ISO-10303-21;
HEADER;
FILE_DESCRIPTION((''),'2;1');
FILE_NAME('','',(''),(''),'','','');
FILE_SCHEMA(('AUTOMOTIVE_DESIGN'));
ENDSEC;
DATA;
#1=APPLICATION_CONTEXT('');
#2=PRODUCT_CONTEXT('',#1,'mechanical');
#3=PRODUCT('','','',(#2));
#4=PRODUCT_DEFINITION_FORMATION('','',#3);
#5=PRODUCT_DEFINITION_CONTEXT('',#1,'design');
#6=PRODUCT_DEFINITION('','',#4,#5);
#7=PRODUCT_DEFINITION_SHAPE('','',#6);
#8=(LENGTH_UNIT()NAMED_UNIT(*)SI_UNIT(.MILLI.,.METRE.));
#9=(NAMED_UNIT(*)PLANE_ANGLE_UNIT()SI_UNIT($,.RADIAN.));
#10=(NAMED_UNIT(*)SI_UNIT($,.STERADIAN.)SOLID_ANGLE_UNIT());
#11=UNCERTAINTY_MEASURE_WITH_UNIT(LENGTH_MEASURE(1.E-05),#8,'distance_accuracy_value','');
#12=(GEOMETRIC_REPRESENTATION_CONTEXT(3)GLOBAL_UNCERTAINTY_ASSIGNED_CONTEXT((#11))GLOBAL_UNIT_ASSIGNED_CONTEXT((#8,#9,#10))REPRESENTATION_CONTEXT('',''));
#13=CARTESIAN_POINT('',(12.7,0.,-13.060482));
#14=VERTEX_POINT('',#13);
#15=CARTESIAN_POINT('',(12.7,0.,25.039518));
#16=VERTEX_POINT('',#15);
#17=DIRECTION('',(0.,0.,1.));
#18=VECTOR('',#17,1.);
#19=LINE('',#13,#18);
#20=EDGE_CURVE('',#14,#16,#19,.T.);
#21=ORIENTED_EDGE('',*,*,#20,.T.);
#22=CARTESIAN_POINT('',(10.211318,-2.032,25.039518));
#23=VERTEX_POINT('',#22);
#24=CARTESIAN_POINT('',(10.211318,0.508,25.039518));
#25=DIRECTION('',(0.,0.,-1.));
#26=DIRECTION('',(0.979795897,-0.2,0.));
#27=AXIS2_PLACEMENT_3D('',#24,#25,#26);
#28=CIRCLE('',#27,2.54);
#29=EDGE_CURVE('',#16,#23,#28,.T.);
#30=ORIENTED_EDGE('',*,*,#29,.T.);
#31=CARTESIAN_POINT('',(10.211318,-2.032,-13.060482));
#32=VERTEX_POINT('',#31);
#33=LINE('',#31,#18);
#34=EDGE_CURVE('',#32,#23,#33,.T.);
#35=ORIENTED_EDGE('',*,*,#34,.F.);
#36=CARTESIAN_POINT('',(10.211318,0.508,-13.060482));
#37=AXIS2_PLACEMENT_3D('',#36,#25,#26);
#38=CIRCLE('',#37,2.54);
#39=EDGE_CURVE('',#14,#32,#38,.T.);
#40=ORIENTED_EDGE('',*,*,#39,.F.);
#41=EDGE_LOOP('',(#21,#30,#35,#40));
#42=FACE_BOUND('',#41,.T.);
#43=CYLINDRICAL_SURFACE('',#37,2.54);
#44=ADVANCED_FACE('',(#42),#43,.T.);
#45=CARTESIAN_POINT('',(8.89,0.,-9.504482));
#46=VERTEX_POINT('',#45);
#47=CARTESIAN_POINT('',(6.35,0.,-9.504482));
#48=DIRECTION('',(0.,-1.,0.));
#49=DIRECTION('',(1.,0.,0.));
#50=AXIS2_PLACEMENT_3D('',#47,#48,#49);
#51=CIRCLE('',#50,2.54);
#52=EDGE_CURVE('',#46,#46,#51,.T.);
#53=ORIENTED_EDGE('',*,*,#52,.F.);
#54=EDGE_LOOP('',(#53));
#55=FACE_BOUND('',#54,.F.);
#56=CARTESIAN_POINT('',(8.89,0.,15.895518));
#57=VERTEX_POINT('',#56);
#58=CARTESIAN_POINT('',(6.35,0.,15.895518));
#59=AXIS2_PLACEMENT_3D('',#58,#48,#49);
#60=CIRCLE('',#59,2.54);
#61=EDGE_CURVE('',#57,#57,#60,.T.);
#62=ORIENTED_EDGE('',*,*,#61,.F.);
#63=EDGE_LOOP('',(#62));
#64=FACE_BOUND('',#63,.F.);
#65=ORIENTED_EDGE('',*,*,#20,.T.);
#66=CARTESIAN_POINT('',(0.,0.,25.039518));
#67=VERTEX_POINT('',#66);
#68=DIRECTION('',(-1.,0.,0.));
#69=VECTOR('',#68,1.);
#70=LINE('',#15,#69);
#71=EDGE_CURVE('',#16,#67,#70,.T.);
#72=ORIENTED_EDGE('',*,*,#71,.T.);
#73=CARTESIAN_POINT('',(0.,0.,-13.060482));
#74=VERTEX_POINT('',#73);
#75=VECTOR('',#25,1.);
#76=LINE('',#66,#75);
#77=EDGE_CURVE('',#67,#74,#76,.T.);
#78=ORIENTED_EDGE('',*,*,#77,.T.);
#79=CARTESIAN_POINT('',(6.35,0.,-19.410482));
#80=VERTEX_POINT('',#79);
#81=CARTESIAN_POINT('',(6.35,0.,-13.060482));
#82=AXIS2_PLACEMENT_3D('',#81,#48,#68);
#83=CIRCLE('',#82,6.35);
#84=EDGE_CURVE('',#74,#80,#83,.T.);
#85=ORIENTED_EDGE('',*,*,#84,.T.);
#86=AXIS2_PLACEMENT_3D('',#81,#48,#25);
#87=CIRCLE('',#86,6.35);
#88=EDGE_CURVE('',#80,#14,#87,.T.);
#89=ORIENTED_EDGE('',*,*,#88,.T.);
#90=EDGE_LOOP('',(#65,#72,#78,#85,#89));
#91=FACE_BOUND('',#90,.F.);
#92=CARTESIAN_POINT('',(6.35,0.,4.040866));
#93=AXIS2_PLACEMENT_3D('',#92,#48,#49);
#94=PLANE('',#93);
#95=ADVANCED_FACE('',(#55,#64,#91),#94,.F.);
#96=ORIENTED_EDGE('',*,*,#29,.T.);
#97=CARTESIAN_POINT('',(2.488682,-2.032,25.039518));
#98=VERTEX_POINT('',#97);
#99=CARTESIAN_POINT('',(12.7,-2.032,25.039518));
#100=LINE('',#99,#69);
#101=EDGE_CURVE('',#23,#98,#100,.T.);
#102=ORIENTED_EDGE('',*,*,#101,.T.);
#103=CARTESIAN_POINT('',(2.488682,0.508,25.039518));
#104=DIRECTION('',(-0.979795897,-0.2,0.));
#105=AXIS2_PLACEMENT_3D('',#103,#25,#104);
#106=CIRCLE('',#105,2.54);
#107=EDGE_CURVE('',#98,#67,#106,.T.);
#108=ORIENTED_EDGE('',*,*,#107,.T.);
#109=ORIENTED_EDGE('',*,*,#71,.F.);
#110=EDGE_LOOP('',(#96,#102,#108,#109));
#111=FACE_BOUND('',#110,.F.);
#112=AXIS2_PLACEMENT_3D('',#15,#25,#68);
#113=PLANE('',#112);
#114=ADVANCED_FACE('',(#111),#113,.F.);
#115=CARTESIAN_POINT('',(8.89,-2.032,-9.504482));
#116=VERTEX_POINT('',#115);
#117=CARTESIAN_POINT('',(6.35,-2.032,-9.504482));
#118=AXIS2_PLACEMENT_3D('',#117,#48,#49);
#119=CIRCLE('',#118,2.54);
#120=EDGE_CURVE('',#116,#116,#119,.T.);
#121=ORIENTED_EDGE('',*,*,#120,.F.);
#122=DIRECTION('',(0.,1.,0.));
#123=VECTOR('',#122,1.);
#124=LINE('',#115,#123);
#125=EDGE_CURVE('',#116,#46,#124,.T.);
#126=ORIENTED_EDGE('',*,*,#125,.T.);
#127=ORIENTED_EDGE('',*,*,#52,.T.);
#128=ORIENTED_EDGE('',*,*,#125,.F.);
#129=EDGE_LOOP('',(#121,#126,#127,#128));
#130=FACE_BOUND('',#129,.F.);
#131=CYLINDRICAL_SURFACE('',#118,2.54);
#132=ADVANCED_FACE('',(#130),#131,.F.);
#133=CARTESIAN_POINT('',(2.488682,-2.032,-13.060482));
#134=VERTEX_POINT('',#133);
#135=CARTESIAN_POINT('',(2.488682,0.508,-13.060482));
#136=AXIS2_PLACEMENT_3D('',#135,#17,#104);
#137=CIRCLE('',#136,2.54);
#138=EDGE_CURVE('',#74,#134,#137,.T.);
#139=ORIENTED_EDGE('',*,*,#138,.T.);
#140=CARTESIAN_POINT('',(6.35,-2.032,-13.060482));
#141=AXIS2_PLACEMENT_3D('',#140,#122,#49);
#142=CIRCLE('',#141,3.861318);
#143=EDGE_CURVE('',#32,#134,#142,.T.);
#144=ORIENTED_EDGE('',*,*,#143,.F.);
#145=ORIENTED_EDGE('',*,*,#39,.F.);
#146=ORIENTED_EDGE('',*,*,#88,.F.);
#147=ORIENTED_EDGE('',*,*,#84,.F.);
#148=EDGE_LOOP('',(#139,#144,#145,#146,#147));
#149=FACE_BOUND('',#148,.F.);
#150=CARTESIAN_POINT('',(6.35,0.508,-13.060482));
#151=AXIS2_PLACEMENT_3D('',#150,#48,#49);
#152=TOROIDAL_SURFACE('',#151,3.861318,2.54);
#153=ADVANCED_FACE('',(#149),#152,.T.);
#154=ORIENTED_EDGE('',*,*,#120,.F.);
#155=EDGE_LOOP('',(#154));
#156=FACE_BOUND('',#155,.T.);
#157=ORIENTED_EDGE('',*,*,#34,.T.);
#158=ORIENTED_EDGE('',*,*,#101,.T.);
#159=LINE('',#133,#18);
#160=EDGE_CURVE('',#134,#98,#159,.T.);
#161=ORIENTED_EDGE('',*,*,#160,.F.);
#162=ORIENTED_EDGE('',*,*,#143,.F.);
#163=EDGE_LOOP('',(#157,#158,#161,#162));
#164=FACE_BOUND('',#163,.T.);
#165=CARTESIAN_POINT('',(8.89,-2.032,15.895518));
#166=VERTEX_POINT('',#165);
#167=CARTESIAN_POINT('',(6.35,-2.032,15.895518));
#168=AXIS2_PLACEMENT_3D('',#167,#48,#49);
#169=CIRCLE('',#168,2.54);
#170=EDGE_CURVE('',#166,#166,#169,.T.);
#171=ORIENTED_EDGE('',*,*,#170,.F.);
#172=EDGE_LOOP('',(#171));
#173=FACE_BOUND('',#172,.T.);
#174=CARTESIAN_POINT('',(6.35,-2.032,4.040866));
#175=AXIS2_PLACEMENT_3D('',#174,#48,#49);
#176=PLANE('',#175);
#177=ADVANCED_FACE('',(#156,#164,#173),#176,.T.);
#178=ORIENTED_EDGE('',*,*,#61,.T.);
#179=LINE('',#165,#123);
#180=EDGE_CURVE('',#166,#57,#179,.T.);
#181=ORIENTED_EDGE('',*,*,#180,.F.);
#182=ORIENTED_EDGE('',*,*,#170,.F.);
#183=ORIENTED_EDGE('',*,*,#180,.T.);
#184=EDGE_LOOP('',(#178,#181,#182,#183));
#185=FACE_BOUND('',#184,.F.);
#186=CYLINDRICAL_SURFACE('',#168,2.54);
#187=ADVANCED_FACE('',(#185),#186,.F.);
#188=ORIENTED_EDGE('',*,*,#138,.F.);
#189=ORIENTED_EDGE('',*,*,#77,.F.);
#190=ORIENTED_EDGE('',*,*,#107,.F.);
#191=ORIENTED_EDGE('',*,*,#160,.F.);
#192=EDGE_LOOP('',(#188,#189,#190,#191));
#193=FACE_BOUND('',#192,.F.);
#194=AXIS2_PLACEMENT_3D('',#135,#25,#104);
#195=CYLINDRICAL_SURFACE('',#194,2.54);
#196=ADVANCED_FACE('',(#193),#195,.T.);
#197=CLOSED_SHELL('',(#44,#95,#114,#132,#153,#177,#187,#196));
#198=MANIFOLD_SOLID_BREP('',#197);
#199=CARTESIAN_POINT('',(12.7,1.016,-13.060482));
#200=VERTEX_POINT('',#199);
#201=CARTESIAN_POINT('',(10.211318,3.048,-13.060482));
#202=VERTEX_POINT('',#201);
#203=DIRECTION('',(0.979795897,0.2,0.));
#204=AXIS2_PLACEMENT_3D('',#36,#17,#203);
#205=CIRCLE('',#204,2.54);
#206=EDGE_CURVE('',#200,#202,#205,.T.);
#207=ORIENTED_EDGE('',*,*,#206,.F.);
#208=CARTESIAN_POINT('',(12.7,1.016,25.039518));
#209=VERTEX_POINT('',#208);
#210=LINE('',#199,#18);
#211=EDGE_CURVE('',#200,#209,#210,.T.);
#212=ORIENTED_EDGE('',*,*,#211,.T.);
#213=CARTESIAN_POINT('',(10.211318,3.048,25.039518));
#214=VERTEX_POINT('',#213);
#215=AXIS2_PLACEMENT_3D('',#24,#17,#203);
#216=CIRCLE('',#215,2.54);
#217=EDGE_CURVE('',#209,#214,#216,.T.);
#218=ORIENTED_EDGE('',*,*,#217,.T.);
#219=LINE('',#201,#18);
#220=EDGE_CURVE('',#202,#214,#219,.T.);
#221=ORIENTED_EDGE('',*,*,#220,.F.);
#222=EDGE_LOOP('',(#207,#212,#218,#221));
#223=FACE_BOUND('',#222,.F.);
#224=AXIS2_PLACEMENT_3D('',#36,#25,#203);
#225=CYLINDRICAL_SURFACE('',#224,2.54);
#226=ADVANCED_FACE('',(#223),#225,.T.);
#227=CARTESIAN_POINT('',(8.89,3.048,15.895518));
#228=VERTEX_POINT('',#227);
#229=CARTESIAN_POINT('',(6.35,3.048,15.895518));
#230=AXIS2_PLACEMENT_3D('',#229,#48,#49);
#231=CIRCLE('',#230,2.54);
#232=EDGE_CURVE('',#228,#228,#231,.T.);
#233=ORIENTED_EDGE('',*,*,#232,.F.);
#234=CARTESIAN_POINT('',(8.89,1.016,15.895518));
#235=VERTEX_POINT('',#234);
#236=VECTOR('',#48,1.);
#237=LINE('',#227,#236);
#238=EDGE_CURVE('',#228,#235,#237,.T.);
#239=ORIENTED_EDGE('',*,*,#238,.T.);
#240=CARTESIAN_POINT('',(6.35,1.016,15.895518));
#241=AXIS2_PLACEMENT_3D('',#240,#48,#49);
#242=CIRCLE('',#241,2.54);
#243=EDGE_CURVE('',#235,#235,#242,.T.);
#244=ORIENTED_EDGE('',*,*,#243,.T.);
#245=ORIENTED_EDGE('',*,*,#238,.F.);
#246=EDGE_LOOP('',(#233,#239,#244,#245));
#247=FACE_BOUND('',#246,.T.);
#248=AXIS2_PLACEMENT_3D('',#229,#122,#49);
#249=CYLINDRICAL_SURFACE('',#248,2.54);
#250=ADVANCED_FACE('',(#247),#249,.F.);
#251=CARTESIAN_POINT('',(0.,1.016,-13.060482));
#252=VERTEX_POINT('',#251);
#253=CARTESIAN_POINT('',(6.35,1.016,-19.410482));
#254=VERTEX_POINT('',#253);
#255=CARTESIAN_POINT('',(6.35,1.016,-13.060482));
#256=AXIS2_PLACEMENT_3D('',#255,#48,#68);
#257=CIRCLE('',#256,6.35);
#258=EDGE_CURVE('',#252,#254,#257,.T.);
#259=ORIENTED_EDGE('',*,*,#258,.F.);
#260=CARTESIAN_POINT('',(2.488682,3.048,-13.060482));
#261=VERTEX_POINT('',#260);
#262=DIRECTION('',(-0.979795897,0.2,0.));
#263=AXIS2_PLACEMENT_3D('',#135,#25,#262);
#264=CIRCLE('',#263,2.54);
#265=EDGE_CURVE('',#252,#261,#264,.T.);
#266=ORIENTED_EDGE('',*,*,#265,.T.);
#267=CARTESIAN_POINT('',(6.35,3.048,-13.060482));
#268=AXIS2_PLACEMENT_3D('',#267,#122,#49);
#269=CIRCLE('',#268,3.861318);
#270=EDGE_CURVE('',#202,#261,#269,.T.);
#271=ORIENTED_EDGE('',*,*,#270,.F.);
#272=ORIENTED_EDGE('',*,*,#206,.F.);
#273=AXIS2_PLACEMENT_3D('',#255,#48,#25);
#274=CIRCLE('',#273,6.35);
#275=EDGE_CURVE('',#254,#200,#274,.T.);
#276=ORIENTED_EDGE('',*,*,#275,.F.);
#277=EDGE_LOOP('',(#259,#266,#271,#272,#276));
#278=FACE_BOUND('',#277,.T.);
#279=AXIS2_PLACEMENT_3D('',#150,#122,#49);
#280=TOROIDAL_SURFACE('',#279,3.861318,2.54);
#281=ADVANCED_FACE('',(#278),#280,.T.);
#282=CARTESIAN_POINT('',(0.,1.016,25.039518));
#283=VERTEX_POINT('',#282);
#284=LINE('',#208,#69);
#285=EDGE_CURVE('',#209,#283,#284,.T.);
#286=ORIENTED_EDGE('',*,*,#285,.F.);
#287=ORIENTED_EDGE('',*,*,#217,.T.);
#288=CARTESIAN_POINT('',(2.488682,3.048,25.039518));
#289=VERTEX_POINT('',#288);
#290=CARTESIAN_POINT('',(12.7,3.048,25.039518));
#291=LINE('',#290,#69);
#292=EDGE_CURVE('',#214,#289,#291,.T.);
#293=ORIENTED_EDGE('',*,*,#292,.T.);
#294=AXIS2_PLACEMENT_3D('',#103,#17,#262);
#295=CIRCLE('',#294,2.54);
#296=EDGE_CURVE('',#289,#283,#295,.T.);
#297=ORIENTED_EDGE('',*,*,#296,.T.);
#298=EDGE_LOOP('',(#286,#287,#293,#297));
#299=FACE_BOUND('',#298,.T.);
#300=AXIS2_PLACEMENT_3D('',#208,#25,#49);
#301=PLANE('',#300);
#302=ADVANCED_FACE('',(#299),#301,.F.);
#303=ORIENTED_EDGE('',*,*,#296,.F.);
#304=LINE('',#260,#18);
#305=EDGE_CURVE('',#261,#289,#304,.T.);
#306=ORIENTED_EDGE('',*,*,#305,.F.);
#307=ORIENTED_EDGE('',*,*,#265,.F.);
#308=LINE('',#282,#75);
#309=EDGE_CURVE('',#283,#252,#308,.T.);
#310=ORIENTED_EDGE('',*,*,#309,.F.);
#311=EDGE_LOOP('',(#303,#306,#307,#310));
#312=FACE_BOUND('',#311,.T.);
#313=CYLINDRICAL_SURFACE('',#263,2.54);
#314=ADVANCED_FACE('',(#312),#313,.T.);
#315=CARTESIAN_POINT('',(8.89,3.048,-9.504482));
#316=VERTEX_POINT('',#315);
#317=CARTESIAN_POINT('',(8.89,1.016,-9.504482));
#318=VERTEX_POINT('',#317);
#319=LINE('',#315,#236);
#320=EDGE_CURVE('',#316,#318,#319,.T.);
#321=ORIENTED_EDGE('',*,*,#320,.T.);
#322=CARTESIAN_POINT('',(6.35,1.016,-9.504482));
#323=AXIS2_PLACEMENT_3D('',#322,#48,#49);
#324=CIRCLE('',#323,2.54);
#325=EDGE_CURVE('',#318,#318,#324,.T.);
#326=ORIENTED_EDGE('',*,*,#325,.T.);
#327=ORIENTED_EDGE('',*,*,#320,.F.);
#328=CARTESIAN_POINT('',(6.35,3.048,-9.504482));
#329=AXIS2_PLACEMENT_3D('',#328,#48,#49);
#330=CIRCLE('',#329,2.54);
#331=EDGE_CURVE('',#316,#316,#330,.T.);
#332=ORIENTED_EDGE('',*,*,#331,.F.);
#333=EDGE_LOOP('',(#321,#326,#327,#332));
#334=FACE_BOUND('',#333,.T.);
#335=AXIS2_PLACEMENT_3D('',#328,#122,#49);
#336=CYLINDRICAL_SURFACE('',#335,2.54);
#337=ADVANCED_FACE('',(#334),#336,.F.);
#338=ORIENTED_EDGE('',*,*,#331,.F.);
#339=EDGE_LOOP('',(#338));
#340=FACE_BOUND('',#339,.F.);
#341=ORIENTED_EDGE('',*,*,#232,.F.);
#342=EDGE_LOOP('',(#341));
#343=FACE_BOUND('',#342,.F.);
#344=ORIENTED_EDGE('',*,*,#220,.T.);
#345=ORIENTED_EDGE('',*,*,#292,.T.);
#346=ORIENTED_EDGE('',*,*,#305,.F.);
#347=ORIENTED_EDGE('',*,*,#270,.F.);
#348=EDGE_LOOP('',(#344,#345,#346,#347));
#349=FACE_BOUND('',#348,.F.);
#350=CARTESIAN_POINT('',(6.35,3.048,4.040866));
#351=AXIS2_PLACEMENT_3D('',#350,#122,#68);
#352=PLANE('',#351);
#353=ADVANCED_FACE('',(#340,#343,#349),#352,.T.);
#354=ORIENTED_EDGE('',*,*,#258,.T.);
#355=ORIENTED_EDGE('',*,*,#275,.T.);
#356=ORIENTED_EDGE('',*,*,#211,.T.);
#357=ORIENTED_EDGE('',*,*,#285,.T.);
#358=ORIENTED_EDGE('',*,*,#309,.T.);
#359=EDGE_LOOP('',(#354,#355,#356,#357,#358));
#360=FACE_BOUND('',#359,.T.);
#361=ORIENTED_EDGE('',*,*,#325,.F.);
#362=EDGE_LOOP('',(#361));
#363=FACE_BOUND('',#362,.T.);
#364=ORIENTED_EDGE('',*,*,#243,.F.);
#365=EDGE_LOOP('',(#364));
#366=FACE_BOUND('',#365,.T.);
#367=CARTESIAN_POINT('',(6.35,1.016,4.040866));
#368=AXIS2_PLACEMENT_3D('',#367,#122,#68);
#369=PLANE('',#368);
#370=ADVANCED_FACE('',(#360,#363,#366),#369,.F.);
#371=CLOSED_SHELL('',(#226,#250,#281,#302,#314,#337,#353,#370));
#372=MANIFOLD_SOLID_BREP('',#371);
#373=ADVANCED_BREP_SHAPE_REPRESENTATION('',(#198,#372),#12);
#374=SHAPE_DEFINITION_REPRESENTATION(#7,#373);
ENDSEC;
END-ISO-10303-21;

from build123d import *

# Parameters (mm, degrees)
F1_DEPTH    = 2.032
F2_R        = 2.54
F3_DEPTH    = 2.032
F4_T1_DEPTH = 44.3217039467
F4_T4_ANGLE = 180


# Not quite as in the source:
# - a fillet or chamfer that OpenCascade refuses, or shapes differently, is made with other operations: its cross-section is extruded or revolved along the edge and cut away or added


with BuildPart() as f1:
    # F0 (on Front) → F1 (new body)
    with BuildSketch(Plane.XZ):
        with BuildLine():
            Line((12.7, 25.0395175091), (0, 25.0395175091))
            Line((0, 25.0395175091), (0, -13.0604824909))
            ThreePointArc((0, -13.0604824909), (1.8598719395, -17.5506105514), (6.35, -19.4104824909))
            ThreePointArc((6.35, -19.4104824909), (10.8401280605, -17.5506105514), (12.7, -13.0604824909))
            Line((12.7, -13.0604824909), (12.7, 25.0395175091))
        make_face()
    extrude(amount=F1_DEPTH)

    # F2 (on face) → F3 (cut)
    with BuildSketch(Plane.XZ.offset(2.032)):
        with Locations((6.35, -9.5044824909)):
            Circle(F2_R)
        with Locations((6.35, 15.8955175091)):
            Circle(F2_R)
    extrude(amount=-F3_DEPTH, mode=Mode.SUBTRACT)

    # F4: fillet of radius 2.54 on 1 edges, made by hand

    # F4_s2 → F4_t1 (cut)
    with BuildSketch(Plane.XY.offset(-13.0604824909)):
        with BuildLine():
            ThreePointArc((12.7, 0), (11.8177554727, -1.4594755399), (10.2113184213, -2.032))
            Line((10.2113184213, -2.032), (12.7, -2.032))
            Line((12.7, -2.032), (12.7, 0))
        make_face()
        with BuildLine():
            ThreePointArc((0, 0), (0.8822445273, -1.4594755399), (2.4886815787, -2.032))
            Line((2.4886815787, -2.032), (0, -2.032))
            Line((0, -2.032), (0, 0))
        make_face()
    extrude(amount=F4_T1_DEPTH, mode=Mode.SUBTRACT)

    # F4_s3 → F4_t4 (revolve, cut)
    with BuildSketch(Plane.XY.offset(-13.0604824909)):
        with BuildLine():
            ThreePointArc((12.7, 0), (11.8177554727, -1.4594755399), (10.2113184213, -2.032))
            Line((10.2113184213, -2.032), (12.7, -2.032))
            Line((12.7, -2.032), (12.7, 0))
        make_face()
    revolve(axis=Axis((6.35, -2.032, -13.0604824909), (0, 1, 0)), revolution_arc=F4_T4_ANGLE, mode=Mode.SUBTRACT)


with BuildPart() as f6_1:
    # F6: instance of F1
    add(f1.part.mirror(Plane(origin=(6.35, 0.508, 3.4947340596), x_dir=(1, 0, 0), z_dir=(0, 1, 0))))


solid = Compound([f1.part, f6_1.part])
